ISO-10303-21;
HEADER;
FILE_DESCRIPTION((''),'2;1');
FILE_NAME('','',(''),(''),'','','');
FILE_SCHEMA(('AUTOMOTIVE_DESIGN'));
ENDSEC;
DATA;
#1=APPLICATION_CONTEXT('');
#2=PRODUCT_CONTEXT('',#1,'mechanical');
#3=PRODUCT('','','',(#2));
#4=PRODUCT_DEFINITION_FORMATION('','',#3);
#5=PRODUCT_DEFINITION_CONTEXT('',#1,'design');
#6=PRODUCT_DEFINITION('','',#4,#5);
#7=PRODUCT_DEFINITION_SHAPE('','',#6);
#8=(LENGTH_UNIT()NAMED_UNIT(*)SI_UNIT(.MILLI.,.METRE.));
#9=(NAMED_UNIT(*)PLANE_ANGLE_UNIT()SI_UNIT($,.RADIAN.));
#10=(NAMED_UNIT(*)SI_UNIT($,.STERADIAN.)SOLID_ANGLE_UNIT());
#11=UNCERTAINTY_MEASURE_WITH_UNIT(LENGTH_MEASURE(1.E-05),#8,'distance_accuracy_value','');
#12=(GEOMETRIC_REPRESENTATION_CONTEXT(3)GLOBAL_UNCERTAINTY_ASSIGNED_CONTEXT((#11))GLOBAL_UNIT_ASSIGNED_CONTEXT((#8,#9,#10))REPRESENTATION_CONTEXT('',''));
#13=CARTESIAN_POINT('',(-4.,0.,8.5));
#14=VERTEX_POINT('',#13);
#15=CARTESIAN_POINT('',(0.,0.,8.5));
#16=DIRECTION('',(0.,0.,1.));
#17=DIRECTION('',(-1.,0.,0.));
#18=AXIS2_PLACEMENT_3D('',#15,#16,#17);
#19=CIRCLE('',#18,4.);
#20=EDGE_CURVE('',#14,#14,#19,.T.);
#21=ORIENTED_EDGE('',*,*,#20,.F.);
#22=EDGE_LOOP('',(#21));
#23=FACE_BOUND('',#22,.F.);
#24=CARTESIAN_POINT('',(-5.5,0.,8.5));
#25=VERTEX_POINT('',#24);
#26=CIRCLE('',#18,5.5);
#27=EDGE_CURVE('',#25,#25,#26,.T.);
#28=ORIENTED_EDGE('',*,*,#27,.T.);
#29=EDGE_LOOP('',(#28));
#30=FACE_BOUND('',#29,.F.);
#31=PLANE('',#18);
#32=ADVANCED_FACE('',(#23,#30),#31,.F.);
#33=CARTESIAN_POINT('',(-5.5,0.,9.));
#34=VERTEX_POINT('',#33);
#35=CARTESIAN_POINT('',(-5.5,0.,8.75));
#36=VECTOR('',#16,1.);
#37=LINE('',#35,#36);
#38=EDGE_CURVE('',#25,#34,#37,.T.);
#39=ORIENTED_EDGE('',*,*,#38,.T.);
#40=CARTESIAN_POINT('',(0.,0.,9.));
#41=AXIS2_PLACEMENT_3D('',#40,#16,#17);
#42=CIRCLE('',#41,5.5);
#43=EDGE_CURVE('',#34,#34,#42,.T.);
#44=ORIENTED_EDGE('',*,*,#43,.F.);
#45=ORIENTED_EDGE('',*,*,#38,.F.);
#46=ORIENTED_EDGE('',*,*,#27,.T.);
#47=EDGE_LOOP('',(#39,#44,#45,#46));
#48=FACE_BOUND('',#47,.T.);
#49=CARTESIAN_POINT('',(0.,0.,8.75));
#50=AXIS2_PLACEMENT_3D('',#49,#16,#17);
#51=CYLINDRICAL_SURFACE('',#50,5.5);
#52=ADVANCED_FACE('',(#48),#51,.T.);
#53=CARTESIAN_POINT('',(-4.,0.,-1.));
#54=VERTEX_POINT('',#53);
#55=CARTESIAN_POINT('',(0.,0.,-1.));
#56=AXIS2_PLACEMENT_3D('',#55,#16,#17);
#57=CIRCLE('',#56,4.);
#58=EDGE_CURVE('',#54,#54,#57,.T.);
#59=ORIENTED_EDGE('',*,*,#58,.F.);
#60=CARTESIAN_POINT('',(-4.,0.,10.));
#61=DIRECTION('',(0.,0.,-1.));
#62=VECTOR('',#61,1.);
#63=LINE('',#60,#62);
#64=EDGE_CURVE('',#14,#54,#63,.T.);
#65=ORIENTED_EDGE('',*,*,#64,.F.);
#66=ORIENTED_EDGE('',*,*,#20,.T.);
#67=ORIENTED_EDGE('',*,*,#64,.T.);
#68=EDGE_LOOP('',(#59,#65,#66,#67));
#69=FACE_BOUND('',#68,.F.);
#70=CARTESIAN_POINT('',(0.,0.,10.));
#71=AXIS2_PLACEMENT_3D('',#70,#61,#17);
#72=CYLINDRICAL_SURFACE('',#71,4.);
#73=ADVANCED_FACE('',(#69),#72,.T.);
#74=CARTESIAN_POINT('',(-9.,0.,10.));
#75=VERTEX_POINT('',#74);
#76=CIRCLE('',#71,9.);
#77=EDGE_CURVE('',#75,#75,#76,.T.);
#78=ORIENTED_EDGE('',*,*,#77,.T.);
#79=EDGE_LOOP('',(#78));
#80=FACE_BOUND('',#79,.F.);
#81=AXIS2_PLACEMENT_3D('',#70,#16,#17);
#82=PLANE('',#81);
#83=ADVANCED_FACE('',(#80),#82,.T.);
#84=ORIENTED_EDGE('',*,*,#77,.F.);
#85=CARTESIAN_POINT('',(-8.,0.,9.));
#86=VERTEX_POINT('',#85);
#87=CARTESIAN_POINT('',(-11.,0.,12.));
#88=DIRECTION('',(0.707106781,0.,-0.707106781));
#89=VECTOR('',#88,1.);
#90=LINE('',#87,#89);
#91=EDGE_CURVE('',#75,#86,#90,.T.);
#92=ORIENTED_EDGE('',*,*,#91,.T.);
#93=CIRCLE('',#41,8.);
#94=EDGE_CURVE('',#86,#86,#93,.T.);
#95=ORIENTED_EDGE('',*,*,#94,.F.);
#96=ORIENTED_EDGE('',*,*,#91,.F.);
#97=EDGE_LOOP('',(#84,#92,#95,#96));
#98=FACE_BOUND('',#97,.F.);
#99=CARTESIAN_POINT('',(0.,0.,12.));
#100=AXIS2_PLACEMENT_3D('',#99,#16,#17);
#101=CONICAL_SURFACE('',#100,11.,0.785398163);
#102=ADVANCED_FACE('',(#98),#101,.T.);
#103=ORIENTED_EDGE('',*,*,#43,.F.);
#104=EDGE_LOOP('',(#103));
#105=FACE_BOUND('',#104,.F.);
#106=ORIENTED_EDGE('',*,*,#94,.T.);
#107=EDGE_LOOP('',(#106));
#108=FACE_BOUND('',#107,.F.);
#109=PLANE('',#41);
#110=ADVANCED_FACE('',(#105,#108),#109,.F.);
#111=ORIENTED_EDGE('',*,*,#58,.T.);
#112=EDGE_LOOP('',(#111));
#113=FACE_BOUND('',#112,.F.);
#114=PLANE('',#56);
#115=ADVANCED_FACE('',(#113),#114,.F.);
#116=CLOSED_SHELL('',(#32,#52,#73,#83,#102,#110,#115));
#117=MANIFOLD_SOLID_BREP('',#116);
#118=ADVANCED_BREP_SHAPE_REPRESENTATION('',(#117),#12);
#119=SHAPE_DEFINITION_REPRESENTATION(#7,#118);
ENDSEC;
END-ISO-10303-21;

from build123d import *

# Parameters (mm, degrees)
F0_W   = 4
F0_H   = 1
F0_W_2 = 1.5
F0_H_2 = 0.5


# Not quite as in the source:
# - a fillet or chamfer that OpenCascade refuses, or shapes differently, is made with other operations: its cross-section is extruded or revolved along the edge and cut away or added


with BuildPart() as f1:
    # F0 (on Front) → F1 (revolve)
    with BuildSketch(Plane.XZ):
        with Locations((-2, -0.5)):
            Rectangle(F0_W, F0_H)
        Polygon((-4, 0), (0, 0), (0, 10), (-4, 10), (-4, 9), (-4, 8.5), align=None)
        with Locations((-4.75, 8.75)):
            Rectangle(F0_W_2, F0_H_2)
        Polygon((-4, 9), (-4, 10), (-11, 10), (-11, 9), (-5.5, 9), align=None)
    revolve(axis=Axis((0, 0, 5), (0, 0, 1)))

    # F2: chamfer of 3 on 1 edges, made by hand

    # F2_s1 → F2_t2 (revolve, cut)
    with BuildSketch(Plane.XZ):
        Polygon((-11, 12), (-8, 9), (-11, 9), align=None)
    revolve(axis=Axis((0, 0, 9), (0, 0, 1)), mode=Mode.SUBTRACT)


solid = f1.part
